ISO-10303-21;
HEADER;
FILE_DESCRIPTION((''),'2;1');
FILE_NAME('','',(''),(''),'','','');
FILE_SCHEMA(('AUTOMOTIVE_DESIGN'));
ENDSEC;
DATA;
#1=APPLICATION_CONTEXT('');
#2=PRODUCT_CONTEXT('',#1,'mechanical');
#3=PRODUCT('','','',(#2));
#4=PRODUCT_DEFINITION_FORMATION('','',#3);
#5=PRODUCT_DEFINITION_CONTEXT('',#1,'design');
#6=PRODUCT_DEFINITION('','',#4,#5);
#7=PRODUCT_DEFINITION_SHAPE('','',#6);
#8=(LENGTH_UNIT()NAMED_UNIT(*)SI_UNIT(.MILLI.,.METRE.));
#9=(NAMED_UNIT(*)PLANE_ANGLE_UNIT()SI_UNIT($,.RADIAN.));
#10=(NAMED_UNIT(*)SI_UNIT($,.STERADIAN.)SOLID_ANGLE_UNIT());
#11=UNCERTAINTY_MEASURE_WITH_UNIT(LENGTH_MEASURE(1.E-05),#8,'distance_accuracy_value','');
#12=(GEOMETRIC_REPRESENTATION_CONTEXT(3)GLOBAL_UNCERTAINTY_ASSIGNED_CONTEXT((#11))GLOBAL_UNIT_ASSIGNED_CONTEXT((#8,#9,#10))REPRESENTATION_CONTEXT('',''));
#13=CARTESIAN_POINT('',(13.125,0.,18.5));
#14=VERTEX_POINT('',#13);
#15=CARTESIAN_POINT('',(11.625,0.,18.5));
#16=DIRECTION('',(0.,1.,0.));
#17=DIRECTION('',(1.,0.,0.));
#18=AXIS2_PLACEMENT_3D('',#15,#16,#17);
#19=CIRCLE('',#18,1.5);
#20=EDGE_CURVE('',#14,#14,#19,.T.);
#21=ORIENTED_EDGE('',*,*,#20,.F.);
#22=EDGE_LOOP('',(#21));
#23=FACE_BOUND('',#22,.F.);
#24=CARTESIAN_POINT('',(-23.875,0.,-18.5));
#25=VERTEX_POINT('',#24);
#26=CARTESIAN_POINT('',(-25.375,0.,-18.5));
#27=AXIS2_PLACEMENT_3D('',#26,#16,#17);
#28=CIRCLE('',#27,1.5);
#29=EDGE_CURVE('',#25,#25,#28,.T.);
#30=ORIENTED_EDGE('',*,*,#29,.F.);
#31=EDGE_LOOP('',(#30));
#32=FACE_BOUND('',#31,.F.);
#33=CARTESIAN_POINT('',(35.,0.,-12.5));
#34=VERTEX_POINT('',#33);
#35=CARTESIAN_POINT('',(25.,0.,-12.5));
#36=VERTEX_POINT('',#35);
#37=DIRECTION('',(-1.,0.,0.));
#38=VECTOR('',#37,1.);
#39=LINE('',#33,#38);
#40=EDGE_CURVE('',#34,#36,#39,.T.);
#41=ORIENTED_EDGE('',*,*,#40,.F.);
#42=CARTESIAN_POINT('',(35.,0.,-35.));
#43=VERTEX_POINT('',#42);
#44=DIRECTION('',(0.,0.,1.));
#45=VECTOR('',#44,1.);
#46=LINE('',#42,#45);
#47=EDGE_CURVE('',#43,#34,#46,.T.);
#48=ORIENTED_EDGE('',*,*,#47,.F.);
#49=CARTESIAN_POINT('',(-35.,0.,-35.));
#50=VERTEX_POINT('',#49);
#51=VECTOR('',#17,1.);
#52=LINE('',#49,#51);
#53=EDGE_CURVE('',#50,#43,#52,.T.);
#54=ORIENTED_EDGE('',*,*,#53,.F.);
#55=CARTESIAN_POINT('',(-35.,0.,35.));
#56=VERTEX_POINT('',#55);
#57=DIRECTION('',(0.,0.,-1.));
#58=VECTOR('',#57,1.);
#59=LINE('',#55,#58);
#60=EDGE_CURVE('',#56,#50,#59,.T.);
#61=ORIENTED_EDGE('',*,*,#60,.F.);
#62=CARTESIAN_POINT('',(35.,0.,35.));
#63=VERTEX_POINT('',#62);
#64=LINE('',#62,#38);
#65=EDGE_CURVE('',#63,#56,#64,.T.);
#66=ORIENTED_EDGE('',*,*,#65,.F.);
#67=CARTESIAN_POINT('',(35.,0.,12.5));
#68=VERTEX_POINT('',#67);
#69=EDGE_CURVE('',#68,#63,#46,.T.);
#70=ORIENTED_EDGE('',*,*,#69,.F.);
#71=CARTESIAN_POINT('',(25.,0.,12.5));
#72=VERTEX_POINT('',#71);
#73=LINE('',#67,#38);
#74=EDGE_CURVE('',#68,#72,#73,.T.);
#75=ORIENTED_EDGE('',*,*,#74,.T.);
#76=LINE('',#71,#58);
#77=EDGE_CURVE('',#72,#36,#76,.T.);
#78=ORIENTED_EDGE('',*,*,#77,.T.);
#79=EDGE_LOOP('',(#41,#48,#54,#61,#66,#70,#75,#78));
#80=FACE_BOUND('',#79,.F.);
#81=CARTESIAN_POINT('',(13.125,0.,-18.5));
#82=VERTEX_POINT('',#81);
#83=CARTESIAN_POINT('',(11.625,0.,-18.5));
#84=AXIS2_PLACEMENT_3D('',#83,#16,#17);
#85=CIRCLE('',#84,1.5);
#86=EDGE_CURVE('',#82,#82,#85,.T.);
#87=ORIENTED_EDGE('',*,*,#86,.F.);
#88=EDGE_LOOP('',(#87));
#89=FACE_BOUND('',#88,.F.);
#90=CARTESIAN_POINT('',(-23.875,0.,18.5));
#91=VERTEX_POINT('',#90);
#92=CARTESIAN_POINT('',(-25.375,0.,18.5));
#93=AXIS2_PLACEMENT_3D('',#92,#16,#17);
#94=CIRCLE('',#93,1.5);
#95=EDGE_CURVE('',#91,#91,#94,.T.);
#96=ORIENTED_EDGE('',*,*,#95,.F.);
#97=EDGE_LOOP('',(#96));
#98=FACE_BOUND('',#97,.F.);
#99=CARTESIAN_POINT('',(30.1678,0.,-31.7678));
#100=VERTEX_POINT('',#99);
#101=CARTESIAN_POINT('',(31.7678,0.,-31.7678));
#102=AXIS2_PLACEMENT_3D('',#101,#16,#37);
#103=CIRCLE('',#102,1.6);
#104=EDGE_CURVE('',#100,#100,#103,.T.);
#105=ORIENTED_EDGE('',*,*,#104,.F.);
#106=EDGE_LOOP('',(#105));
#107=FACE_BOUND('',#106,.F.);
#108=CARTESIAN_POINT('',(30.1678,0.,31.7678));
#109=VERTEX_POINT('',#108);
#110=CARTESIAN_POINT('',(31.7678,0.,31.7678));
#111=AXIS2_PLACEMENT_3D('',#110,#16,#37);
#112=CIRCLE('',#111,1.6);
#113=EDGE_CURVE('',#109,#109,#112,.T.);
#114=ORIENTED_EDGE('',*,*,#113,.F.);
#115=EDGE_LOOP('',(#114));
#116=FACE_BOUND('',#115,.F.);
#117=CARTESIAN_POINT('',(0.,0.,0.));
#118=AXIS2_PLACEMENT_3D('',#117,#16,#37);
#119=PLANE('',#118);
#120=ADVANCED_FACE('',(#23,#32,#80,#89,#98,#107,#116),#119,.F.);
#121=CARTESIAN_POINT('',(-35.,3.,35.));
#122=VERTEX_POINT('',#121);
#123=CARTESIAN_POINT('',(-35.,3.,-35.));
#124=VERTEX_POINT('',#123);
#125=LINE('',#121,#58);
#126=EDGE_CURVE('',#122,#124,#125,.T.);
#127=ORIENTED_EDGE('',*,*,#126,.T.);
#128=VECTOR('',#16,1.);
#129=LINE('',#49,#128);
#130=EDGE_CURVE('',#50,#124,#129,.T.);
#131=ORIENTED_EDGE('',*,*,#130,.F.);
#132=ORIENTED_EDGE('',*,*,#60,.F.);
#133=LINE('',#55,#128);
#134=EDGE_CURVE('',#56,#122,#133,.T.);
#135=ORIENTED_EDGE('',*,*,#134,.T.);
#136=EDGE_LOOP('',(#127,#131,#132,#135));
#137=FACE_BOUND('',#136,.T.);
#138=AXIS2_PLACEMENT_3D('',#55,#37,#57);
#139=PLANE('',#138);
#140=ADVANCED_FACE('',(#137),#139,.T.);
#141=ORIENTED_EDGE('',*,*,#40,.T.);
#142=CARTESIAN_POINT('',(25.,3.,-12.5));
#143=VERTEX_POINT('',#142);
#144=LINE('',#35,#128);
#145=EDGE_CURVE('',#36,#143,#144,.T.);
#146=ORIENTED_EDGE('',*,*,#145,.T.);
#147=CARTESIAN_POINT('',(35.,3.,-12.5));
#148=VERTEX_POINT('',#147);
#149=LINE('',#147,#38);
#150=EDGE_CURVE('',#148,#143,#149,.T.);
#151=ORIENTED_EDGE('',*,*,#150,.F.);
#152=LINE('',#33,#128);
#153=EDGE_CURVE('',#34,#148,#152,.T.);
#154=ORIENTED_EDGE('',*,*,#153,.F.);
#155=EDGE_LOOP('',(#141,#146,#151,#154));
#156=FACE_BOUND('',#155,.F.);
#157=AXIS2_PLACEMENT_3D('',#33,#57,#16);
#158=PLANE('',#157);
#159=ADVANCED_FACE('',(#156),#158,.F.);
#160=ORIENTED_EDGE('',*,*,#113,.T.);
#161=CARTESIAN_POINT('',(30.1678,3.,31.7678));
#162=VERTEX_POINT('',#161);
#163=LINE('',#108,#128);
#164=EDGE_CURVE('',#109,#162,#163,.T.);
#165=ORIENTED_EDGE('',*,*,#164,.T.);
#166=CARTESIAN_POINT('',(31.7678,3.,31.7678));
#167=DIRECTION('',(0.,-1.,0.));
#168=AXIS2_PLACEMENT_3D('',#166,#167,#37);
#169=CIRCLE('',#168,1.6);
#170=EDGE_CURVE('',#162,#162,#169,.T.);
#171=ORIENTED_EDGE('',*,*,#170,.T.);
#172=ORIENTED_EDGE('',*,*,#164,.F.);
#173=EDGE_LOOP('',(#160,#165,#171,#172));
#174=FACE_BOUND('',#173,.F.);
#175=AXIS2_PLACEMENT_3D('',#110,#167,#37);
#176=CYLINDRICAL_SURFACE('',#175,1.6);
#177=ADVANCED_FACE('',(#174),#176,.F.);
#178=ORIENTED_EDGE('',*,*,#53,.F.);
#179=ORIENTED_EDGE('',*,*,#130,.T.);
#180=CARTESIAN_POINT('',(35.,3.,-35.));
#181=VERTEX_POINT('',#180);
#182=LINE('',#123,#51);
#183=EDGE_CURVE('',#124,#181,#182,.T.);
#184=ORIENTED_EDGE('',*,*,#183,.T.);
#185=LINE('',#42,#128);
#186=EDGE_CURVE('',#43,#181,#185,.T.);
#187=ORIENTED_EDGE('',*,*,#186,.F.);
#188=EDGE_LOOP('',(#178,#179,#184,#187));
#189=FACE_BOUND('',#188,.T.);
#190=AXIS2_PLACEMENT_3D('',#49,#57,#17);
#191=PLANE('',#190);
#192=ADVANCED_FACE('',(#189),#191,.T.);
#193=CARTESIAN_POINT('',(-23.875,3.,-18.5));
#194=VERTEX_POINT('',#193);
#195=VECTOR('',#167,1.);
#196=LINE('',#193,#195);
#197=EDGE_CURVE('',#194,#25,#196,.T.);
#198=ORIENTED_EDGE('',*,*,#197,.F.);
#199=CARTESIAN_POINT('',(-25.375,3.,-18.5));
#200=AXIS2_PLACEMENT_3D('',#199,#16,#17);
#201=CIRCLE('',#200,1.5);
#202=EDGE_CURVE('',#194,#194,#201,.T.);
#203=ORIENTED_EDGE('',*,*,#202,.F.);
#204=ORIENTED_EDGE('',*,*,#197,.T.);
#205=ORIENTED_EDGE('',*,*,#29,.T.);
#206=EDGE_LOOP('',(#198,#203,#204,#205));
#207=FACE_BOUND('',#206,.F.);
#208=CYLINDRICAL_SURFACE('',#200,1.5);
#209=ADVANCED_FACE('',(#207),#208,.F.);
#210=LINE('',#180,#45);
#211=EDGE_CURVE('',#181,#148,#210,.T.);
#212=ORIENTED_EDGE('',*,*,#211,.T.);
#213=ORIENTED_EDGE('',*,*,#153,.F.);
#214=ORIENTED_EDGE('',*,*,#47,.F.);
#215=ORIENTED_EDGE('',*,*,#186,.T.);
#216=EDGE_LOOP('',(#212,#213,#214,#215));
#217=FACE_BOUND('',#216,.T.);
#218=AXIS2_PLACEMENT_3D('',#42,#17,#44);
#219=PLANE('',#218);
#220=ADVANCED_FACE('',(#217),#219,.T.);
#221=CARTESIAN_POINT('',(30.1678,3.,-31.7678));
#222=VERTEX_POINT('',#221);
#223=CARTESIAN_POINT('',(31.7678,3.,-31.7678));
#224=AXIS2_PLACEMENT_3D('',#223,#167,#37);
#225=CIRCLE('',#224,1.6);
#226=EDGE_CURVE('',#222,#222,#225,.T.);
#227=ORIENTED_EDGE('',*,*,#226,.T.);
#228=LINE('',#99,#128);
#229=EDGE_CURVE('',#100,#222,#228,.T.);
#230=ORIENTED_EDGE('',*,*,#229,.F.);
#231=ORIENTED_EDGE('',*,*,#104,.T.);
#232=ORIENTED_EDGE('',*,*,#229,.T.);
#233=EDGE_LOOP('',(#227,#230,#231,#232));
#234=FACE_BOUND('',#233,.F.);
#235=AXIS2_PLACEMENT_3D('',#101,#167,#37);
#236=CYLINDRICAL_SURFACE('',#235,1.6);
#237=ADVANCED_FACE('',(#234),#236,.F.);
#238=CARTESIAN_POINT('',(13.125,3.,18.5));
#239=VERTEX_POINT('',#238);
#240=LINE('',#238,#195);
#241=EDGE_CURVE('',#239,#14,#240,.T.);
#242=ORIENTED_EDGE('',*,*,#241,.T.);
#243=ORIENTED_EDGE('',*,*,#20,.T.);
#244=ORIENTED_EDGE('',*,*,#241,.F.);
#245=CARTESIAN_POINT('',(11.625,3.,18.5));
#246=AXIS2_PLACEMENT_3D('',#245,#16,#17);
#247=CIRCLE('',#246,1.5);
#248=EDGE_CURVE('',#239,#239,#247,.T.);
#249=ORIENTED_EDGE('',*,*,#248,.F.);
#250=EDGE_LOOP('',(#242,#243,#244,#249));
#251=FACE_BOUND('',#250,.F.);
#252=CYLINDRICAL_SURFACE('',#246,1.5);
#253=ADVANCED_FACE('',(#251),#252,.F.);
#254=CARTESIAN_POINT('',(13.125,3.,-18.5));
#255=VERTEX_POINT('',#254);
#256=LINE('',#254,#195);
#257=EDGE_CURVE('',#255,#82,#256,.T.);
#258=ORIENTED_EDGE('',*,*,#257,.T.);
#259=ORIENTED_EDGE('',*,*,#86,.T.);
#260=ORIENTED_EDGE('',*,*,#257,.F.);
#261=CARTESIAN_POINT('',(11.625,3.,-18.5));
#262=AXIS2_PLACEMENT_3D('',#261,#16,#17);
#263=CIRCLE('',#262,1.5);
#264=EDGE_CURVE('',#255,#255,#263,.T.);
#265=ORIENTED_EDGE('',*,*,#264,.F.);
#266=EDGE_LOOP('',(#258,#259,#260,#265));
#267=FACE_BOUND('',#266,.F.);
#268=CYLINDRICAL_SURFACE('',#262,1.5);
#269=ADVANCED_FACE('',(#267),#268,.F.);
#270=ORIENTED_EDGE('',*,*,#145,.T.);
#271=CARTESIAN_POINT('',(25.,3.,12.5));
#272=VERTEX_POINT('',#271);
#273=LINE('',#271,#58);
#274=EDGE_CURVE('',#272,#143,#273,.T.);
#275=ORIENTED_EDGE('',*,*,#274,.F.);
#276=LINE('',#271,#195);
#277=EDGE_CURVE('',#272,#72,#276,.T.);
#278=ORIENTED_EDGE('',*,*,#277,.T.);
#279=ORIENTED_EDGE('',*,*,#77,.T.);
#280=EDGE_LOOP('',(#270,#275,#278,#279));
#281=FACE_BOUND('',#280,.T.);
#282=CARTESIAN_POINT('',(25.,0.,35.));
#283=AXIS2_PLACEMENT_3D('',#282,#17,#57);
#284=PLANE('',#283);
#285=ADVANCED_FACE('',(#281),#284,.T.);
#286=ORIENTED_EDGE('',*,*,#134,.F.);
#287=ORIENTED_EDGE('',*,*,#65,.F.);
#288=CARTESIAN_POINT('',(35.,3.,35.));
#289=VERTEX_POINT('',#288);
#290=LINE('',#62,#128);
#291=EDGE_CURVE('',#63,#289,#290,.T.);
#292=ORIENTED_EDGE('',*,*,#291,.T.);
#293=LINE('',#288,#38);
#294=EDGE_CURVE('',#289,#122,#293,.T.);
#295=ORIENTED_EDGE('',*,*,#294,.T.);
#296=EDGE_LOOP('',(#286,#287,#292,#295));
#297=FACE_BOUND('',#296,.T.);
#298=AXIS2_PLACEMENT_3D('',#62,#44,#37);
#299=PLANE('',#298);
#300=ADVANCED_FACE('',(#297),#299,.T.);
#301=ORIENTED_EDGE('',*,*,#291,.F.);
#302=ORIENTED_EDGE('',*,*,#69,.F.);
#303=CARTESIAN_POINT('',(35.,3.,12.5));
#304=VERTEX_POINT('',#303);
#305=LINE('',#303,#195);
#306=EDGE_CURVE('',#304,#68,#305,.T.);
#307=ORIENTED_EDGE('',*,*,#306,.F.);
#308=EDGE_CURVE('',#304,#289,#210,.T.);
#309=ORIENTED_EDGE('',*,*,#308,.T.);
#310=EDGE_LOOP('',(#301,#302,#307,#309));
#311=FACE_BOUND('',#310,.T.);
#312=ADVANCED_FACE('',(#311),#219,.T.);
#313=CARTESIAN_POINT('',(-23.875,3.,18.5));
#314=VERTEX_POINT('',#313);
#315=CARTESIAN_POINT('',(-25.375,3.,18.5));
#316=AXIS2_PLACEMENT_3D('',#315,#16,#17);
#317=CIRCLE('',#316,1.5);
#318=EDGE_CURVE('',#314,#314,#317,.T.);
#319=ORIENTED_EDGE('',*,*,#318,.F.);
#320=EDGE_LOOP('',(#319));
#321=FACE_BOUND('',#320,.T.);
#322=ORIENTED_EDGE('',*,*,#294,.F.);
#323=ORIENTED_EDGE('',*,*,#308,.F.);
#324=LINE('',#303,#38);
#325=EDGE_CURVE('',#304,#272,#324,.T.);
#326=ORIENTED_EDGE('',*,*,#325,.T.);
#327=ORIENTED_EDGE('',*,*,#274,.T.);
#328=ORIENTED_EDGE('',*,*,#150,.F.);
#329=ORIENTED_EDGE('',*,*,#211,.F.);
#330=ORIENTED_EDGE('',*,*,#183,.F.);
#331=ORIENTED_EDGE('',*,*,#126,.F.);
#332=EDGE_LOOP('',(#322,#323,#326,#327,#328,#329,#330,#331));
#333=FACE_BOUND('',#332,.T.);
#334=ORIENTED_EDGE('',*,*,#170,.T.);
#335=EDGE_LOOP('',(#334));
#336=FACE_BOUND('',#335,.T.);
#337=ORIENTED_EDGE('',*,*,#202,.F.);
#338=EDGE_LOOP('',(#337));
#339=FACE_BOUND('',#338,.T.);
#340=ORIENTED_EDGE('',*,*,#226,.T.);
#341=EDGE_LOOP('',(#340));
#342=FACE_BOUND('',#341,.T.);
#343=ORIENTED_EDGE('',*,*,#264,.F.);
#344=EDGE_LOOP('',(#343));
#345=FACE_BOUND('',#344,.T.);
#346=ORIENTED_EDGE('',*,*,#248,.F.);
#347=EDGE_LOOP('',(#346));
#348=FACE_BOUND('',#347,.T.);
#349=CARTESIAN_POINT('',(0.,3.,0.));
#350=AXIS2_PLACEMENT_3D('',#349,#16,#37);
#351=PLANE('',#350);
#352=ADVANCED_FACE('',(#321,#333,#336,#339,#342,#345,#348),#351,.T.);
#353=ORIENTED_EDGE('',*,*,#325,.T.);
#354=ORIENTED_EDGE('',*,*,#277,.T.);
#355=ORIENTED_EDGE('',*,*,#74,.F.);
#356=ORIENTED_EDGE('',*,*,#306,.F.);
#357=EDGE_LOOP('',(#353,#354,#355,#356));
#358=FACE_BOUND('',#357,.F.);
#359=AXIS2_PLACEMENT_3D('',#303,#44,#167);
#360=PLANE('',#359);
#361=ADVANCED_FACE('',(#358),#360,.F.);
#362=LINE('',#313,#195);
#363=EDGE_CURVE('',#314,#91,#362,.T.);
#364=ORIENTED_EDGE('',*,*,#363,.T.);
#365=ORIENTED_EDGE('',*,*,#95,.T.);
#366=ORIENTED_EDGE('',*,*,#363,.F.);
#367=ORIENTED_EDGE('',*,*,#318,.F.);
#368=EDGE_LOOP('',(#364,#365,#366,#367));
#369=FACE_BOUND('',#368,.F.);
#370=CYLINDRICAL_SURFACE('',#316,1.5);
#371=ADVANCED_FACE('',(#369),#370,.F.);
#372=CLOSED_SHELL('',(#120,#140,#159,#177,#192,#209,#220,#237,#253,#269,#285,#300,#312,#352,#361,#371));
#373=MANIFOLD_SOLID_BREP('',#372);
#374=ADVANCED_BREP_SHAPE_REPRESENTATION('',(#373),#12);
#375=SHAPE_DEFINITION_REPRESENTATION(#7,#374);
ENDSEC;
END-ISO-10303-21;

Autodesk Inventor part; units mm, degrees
ref_plane "YZ Plane" through (0, 0, 0) normal (1, 0, 0) x (0, 1, 0)
ref_plane "XZ Plane" through (0, 0, 0) normal (0, 1, 0) x (-1, 0, 0)
ref_plane "XY Plane" through (0, 0, 0) normal (0, 0, 1) x (1, 0, 0)
sketch "Эскиз1" plane through (0, 0, 0) normal (0, 1, 0) x (-1, 0, 0)
  line L0 (-35, 35) -> (35, 35)
  line L1 (35, 35) -> (35, -35)
  line L2 (35, -35) -> (-35, -35)
  line L3 (-35, -35) -> (-35, 35)
  line L4 (-35, 35) -> (35, -35) construction
  line L5 (35, 35) -> (-35, -35) construction
  line L6 (-35, 35) -> (-31.7678, 31.7678)
  circle A0 centre (-31.7678, 31.7678) radius 1.6
  line L7 (-35, -35) -> (-31.7678, -31.7678)
  circle A1 centre (-31.7678, -31.7678) radius 1.6
  point P0 (0, 0)
  dimension "d0" = 70
  dimension "d1" = 70
  dimension "d2" = 4.571
  dimension "d3" = 3.2
  dimension "d4" = 4.571
  dimension "d5" = 3.2
extrude "Выдавливание1" add sketch "Эскиз1" along normal blind 3
sketch "Эскиз2" plane through (35, 0, 35) normal (1, 0, 0) x (0, 0, -1)
  line L0 (35, 0) -> (35, 3)
  line L1 (0, 3) -> (70, 3) projected
  line L2 (22.5, 0) -> (47.5, 0)
  line L3 (47.5, 0) -> (47.5, 3)
  line L4 (47.5, 3) -> (22.5, 3)
  line L5 (22.5, 3) -> (22.5, 0)
  line L6 (22.5, 0) -> (47.5, 3) construction
  line L7 (47.5, 0) -> (22.5, 3) construction
  point P0 (35, 1.5)
  dimension "d8" = 25
extrude "Выдавливание2" cut sketch "Эскиз2" against normal blind 10
sketch "Эскиз3" plane through (0, 3, 0) normal (0, 1, 0) x (1, 0, 0)
  line L0 (-28.375, -21.875) -> (-28.375, 21.875)
  line L1 (14.625, -21.875) -> (-28.375, -21.875)
  line L2 (14.625, 21.875) -> (14.625, -21.875)
  line L3 (-28.375, 21.875) -> (14.625, 21.875)
  circle A0 centre (11.625, -18.5) radius 1.5
  circle A1 centre (-25.375, -18.5) radius 1.5
  circle A2 centre (-25.375, 18.5) radius 1.5
  circle A3 centre (11.625, 18.5) radius 1.5
  point P0 (0, 0)
  point P1 (-6.875, 0)
extrude "Выдавливание3" cut sketch "Эскиз3" against normal blind 10 contours A0 | A1 | A2 | A3
equation "\"d4\" = d2"
equation "\"d5\" = d3"
properties part number "000.107 - Правая стенка среднего сегмента"
